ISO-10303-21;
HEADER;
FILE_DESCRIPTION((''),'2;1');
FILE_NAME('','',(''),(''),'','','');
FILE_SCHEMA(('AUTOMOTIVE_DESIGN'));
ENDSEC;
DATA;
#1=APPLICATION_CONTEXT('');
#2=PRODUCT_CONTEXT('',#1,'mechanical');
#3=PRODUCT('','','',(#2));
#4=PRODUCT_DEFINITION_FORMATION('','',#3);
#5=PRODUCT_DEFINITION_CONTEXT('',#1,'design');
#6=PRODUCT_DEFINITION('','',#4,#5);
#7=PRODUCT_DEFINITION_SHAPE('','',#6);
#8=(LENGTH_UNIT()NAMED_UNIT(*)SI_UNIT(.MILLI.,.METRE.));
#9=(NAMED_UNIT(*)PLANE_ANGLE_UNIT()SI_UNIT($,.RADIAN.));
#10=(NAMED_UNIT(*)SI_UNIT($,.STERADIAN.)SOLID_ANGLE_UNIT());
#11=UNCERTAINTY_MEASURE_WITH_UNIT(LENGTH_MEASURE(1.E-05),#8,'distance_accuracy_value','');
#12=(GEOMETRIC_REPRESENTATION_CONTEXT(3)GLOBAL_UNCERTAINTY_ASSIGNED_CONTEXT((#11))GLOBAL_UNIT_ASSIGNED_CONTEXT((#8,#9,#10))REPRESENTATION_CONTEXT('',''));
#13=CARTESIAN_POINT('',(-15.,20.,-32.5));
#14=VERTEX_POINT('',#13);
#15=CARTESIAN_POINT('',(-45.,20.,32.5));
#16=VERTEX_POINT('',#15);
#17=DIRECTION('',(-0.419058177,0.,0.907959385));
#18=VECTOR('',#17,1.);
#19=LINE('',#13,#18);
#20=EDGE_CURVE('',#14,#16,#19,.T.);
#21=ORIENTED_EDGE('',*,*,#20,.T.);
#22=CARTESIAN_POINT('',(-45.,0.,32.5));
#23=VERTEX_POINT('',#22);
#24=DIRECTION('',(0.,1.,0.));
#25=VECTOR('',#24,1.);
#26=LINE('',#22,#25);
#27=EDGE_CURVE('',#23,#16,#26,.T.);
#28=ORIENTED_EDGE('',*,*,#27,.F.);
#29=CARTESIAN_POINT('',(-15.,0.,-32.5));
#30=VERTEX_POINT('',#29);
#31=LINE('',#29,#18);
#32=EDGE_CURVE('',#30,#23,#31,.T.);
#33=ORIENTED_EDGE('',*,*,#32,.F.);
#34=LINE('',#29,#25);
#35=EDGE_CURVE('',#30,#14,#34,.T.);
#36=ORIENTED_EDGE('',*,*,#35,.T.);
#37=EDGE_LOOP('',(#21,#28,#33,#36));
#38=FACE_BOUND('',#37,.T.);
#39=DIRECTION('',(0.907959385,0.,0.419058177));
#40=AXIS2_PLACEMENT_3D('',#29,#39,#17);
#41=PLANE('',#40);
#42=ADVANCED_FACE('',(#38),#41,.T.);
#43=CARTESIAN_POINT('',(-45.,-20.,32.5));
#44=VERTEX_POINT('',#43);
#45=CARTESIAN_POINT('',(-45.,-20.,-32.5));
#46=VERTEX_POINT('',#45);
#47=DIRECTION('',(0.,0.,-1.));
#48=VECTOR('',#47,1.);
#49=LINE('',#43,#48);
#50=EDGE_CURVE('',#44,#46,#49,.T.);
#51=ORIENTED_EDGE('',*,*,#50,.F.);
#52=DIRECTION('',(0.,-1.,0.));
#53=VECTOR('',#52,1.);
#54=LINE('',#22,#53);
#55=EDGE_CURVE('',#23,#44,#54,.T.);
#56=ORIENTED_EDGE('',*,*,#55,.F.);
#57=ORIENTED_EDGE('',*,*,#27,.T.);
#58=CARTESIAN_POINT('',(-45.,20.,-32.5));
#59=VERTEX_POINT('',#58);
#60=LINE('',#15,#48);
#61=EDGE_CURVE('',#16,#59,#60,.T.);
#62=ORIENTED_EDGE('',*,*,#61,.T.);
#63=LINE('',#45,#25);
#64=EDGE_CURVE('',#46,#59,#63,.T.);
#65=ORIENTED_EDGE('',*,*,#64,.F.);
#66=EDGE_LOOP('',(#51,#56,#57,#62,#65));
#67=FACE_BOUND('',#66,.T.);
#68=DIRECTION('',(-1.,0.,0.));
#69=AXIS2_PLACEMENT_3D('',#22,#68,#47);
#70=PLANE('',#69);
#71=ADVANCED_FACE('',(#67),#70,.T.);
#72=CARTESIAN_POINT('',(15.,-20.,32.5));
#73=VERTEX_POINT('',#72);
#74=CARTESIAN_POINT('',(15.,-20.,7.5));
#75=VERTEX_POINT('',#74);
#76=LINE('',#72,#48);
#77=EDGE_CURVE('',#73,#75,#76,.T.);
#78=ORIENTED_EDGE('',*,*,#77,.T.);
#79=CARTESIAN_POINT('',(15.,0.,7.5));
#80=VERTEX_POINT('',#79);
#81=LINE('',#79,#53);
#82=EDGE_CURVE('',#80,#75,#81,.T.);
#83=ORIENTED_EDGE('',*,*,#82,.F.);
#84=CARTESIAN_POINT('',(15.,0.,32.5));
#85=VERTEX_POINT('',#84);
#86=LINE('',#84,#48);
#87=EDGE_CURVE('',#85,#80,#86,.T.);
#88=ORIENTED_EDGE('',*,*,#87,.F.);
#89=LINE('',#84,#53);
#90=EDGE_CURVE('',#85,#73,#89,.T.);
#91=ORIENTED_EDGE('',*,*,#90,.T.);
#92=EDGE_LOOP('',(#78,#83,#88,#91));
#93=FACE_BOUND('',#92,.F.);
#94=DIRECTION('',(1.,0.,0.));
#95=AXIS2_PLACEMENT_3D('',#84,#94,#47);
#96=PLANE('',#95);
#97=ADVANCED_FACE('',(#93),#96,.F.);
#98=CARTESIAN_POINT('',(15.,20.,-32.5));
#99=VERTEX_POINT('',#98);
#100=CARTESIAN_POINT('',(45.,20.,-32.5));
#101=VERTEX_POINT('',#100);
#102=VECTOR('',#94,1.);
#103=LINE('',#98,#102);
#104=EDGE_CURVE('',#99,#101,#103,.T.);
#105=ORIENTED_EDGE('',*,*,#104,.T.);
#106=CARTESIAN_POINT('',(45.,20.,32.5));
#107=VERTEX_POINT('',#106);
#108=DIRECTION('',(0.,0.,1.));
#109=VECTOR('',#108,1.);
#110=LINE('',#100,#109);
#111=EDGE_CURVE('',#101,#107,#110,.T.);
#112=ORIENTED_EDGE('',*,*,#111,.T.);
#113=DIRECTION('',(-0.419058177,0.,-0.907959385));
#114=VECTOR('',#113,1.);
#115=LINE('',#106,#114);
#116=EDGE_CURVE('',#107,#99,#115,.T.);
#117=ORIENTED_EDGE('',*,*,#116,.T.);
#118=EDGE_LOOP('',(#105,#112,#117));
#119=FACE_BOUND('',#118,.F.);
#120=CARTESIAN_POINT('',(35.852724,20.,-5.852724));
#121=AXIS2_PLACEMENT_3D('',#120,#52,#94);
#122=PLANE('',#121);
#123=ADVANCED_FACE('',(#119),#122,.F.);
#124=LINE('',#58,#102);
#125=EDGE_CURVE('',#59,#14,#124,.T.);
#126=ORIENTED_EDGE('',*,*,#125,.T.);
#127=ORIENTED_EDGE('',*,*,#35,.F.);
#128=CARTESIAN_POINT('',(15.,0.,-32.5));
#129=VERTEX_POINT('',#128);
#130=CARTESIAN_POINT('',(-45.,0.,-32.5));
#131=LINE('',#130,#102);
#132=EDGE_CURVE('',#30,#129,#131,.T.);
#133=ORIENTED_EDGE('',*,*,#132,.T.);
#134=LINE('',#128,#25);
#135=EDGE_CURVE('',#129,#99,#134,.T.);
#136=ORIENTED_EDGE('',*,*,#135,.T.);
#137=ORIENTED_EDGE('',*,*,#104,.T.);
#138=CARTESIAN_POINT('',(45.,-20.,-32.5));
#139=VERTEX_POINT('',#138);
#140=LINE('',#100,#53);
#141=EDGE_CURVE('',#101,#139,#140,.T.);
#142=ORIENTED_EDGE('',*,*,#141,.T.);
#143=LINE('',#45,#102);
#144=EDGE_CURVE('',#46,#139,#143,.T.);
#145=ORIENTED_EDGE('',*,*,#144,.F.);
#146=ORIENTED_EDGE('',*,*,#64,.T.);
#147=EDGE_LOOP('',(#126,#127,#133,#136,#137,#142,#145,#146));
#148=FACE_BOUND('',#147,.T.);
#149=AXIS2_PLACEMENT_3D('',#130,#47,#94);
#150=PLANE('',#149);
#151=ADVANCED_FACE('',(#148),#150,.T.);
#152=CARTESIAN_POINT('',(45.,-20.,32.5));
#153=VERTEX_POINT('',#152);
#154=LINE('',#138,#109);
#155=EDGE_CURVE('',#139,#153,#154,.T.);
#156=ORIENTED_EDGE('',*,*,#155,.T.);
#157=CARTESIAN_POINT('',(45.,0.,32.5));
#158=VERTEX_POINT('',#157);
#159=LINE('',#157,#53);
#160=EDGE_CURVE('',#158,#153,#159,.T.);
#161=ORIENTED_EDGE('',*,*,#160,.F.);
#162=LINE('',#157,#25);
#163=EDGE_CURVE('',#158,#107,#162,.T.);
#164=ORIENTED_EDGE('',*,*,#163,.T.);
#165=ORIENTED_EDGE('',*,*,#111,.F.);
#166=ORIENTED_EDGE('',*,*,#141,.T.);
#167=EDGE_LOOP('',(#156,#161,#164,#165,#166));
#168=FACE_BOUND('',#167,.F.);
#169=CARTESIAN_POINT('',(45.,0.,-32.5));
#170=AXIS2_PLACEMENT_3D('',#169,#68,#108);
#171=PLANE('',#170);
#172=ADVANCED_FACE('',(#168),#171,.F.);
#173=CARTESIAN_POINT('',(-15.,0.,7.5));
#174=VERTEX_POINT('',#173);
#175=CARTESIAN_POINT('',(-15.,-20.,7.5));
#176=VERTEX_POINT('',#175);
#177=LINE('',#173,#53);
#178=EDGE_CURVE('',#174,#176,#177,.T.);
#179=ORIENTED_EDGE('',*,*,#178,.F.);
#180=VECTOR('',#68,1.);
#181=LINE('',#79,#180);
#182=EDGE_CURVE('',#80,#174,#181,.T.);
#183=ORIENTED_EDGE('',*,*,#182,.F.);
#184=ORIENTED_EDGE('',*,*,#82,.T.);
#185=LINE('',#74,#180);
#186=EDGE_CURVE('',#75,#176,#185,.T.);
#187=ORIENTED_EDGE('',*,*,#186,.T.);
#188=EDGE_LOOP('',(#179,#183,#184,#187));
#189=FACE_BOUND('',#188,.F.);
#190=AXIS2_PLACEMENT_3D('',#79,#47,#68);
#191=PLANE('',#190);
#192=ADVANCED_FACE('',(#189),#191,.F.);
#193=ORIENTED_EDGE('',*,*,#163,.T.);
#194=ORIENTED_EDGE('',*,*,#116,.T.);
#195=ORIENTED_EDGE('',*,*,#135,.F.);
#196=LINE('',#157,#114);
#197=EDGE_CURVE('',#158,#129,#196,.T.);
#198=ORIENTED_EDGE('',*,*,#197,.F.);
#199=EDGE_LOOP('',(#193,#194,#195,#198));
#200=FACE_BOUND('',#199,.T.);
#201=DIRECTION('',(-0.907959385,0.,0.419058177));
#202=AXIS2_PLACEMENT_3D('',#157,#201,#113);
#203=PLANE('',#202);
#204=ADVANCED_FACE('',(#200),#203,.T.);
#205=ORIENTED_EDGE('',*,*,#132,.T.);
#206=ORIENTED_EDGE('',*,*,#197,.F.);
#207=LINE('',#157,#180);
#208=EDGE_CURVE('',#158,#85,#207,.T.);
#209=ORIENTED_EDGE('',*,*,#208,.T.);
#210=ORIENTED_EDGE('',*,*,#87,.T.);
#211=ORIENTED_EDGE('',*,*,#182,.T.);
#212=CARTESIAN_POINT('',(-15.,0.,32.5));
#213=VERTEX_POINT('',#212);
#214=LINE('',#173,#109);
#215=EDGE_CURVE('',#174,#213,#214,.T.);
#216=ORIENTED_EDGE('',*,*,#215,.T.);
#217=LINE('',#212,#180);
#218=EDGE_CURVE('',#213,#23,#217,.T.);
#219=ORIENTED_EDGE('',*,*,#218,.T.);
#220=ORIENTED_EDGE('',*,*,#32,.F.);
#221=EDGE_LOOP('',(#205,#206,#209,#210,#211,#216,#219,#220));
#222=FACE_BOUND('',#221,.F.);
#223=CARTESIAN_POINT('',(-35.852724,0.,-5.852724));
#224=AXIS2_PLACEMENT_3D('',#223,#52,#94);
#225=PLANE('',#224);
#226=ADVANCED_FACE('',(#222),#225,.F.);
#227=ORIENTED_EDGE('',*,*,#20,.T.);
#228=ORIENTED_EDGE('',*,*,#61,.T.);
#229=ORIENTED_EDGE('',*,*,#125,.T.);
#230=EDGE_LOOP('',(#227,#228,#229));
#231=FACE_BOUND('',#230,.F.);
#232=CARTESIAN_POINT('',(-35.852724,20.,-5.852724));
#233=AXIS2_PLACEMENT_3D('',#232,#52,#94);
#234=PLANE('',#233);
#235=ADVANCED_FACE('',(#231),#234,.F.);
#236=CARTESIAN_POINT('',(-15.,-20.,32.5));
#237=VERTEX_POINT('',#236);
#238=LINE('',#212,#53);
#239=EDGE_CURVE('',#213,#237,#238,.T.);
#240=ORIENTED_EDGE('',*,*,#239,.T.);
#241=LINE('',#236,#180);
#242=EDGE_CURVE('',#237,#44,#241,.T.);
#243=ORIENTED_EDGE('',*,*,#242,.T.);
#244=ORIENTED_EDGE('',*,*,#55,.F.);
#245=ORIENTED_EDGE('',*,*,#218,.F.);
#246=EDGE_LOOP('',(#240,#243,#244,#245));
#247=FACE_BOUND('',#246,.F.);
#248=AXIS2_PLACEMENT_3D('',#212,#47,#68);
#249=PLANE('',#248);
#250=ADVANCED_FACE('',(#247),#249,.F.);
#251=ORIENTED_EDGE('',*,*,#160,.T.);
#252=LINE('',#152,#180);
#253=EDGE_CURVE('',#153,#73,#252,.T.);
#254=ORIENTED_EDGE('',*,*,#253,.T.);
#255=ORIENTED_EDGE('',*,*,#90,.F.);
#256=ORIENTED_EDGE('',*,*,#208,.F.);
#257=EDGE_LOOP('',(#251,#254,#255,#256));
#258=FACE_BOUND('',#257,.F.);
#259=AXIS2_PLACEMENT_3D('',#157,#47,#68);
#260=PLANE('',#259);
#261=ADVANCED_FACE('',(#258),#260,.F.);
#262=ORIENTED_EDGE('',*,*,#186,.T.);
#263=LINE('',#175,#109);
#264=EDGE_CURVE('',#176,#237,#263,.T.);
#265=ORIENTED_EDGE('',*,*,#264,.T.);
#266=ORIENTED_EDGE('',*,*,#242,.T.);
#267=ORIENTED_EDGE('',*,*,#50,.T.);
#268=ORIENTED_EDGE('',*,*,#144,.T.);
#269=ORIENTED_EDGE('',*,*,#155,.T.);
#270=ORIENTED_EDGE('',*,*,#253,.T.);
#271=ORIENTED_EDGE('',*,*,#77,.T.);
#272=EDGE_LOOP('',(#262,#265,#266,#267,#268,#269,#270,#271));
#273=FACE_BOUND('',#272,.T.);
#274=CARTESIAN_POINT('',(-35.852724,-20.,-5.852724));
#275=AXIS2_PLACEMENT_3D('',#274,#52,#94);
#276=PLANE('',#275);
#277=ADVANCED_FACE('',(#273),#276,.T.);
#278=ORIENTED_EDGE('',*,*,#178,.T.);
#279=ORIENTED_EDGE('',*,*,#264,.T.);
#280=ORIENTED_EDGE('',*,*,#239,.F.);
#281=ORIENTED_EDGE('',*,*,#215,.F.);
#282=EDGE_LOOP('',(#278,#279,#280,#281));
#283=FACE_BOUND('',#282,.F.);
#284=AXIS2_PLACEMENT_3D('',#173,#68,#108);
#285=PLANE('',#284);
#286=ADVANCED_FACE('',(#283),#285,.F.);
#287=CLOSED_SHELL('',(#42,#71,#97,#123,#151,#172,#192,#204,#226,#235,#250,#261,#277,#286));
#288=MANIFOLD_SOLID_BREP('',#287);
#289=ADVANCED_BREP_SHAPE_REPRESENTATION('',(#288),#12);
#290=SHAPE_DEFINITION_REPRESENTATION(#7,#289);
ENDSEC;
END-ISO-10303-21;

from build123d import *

# Parameters (mm, degrees)
F1_DEPTH = 20
F3_DEPTH = 20


# Not quite as in the source:
# - a feature names something its author has since deleted; it is built from what else it names


with BuildPart() as f1:
    # F0 (on Front) → F1 (new body)
    with BuildSketch(Plane.XZ):
        Polygon((-15, -32.5), (-45, 32.5), (-45, -32.5), align=None)
        Polygon((-15, 32.5), (-45, 32.5), (-15, -32.5), (15, -32.5), (45, 32.5), (15, 32.5), (15, 7.5), (-15, 7.5), align=None)
        Polygon((45, 32.5), (15, -32.5), (45, -32.5), align=None)
    extrude(amount=F1_DEPTH)

    # F0 (on Front) → F3 (join)
    with BuildSketch(Plane.XZ):
        Polygon((-15, -32.5), (-45, 32.5), (-45, -32.5), align=None)
        Polygon((45, 32.5), (15, -32.5), (45, -32.5), align=None)
    extrude(amount=-F3_DEPTH)


solid = f1.part
